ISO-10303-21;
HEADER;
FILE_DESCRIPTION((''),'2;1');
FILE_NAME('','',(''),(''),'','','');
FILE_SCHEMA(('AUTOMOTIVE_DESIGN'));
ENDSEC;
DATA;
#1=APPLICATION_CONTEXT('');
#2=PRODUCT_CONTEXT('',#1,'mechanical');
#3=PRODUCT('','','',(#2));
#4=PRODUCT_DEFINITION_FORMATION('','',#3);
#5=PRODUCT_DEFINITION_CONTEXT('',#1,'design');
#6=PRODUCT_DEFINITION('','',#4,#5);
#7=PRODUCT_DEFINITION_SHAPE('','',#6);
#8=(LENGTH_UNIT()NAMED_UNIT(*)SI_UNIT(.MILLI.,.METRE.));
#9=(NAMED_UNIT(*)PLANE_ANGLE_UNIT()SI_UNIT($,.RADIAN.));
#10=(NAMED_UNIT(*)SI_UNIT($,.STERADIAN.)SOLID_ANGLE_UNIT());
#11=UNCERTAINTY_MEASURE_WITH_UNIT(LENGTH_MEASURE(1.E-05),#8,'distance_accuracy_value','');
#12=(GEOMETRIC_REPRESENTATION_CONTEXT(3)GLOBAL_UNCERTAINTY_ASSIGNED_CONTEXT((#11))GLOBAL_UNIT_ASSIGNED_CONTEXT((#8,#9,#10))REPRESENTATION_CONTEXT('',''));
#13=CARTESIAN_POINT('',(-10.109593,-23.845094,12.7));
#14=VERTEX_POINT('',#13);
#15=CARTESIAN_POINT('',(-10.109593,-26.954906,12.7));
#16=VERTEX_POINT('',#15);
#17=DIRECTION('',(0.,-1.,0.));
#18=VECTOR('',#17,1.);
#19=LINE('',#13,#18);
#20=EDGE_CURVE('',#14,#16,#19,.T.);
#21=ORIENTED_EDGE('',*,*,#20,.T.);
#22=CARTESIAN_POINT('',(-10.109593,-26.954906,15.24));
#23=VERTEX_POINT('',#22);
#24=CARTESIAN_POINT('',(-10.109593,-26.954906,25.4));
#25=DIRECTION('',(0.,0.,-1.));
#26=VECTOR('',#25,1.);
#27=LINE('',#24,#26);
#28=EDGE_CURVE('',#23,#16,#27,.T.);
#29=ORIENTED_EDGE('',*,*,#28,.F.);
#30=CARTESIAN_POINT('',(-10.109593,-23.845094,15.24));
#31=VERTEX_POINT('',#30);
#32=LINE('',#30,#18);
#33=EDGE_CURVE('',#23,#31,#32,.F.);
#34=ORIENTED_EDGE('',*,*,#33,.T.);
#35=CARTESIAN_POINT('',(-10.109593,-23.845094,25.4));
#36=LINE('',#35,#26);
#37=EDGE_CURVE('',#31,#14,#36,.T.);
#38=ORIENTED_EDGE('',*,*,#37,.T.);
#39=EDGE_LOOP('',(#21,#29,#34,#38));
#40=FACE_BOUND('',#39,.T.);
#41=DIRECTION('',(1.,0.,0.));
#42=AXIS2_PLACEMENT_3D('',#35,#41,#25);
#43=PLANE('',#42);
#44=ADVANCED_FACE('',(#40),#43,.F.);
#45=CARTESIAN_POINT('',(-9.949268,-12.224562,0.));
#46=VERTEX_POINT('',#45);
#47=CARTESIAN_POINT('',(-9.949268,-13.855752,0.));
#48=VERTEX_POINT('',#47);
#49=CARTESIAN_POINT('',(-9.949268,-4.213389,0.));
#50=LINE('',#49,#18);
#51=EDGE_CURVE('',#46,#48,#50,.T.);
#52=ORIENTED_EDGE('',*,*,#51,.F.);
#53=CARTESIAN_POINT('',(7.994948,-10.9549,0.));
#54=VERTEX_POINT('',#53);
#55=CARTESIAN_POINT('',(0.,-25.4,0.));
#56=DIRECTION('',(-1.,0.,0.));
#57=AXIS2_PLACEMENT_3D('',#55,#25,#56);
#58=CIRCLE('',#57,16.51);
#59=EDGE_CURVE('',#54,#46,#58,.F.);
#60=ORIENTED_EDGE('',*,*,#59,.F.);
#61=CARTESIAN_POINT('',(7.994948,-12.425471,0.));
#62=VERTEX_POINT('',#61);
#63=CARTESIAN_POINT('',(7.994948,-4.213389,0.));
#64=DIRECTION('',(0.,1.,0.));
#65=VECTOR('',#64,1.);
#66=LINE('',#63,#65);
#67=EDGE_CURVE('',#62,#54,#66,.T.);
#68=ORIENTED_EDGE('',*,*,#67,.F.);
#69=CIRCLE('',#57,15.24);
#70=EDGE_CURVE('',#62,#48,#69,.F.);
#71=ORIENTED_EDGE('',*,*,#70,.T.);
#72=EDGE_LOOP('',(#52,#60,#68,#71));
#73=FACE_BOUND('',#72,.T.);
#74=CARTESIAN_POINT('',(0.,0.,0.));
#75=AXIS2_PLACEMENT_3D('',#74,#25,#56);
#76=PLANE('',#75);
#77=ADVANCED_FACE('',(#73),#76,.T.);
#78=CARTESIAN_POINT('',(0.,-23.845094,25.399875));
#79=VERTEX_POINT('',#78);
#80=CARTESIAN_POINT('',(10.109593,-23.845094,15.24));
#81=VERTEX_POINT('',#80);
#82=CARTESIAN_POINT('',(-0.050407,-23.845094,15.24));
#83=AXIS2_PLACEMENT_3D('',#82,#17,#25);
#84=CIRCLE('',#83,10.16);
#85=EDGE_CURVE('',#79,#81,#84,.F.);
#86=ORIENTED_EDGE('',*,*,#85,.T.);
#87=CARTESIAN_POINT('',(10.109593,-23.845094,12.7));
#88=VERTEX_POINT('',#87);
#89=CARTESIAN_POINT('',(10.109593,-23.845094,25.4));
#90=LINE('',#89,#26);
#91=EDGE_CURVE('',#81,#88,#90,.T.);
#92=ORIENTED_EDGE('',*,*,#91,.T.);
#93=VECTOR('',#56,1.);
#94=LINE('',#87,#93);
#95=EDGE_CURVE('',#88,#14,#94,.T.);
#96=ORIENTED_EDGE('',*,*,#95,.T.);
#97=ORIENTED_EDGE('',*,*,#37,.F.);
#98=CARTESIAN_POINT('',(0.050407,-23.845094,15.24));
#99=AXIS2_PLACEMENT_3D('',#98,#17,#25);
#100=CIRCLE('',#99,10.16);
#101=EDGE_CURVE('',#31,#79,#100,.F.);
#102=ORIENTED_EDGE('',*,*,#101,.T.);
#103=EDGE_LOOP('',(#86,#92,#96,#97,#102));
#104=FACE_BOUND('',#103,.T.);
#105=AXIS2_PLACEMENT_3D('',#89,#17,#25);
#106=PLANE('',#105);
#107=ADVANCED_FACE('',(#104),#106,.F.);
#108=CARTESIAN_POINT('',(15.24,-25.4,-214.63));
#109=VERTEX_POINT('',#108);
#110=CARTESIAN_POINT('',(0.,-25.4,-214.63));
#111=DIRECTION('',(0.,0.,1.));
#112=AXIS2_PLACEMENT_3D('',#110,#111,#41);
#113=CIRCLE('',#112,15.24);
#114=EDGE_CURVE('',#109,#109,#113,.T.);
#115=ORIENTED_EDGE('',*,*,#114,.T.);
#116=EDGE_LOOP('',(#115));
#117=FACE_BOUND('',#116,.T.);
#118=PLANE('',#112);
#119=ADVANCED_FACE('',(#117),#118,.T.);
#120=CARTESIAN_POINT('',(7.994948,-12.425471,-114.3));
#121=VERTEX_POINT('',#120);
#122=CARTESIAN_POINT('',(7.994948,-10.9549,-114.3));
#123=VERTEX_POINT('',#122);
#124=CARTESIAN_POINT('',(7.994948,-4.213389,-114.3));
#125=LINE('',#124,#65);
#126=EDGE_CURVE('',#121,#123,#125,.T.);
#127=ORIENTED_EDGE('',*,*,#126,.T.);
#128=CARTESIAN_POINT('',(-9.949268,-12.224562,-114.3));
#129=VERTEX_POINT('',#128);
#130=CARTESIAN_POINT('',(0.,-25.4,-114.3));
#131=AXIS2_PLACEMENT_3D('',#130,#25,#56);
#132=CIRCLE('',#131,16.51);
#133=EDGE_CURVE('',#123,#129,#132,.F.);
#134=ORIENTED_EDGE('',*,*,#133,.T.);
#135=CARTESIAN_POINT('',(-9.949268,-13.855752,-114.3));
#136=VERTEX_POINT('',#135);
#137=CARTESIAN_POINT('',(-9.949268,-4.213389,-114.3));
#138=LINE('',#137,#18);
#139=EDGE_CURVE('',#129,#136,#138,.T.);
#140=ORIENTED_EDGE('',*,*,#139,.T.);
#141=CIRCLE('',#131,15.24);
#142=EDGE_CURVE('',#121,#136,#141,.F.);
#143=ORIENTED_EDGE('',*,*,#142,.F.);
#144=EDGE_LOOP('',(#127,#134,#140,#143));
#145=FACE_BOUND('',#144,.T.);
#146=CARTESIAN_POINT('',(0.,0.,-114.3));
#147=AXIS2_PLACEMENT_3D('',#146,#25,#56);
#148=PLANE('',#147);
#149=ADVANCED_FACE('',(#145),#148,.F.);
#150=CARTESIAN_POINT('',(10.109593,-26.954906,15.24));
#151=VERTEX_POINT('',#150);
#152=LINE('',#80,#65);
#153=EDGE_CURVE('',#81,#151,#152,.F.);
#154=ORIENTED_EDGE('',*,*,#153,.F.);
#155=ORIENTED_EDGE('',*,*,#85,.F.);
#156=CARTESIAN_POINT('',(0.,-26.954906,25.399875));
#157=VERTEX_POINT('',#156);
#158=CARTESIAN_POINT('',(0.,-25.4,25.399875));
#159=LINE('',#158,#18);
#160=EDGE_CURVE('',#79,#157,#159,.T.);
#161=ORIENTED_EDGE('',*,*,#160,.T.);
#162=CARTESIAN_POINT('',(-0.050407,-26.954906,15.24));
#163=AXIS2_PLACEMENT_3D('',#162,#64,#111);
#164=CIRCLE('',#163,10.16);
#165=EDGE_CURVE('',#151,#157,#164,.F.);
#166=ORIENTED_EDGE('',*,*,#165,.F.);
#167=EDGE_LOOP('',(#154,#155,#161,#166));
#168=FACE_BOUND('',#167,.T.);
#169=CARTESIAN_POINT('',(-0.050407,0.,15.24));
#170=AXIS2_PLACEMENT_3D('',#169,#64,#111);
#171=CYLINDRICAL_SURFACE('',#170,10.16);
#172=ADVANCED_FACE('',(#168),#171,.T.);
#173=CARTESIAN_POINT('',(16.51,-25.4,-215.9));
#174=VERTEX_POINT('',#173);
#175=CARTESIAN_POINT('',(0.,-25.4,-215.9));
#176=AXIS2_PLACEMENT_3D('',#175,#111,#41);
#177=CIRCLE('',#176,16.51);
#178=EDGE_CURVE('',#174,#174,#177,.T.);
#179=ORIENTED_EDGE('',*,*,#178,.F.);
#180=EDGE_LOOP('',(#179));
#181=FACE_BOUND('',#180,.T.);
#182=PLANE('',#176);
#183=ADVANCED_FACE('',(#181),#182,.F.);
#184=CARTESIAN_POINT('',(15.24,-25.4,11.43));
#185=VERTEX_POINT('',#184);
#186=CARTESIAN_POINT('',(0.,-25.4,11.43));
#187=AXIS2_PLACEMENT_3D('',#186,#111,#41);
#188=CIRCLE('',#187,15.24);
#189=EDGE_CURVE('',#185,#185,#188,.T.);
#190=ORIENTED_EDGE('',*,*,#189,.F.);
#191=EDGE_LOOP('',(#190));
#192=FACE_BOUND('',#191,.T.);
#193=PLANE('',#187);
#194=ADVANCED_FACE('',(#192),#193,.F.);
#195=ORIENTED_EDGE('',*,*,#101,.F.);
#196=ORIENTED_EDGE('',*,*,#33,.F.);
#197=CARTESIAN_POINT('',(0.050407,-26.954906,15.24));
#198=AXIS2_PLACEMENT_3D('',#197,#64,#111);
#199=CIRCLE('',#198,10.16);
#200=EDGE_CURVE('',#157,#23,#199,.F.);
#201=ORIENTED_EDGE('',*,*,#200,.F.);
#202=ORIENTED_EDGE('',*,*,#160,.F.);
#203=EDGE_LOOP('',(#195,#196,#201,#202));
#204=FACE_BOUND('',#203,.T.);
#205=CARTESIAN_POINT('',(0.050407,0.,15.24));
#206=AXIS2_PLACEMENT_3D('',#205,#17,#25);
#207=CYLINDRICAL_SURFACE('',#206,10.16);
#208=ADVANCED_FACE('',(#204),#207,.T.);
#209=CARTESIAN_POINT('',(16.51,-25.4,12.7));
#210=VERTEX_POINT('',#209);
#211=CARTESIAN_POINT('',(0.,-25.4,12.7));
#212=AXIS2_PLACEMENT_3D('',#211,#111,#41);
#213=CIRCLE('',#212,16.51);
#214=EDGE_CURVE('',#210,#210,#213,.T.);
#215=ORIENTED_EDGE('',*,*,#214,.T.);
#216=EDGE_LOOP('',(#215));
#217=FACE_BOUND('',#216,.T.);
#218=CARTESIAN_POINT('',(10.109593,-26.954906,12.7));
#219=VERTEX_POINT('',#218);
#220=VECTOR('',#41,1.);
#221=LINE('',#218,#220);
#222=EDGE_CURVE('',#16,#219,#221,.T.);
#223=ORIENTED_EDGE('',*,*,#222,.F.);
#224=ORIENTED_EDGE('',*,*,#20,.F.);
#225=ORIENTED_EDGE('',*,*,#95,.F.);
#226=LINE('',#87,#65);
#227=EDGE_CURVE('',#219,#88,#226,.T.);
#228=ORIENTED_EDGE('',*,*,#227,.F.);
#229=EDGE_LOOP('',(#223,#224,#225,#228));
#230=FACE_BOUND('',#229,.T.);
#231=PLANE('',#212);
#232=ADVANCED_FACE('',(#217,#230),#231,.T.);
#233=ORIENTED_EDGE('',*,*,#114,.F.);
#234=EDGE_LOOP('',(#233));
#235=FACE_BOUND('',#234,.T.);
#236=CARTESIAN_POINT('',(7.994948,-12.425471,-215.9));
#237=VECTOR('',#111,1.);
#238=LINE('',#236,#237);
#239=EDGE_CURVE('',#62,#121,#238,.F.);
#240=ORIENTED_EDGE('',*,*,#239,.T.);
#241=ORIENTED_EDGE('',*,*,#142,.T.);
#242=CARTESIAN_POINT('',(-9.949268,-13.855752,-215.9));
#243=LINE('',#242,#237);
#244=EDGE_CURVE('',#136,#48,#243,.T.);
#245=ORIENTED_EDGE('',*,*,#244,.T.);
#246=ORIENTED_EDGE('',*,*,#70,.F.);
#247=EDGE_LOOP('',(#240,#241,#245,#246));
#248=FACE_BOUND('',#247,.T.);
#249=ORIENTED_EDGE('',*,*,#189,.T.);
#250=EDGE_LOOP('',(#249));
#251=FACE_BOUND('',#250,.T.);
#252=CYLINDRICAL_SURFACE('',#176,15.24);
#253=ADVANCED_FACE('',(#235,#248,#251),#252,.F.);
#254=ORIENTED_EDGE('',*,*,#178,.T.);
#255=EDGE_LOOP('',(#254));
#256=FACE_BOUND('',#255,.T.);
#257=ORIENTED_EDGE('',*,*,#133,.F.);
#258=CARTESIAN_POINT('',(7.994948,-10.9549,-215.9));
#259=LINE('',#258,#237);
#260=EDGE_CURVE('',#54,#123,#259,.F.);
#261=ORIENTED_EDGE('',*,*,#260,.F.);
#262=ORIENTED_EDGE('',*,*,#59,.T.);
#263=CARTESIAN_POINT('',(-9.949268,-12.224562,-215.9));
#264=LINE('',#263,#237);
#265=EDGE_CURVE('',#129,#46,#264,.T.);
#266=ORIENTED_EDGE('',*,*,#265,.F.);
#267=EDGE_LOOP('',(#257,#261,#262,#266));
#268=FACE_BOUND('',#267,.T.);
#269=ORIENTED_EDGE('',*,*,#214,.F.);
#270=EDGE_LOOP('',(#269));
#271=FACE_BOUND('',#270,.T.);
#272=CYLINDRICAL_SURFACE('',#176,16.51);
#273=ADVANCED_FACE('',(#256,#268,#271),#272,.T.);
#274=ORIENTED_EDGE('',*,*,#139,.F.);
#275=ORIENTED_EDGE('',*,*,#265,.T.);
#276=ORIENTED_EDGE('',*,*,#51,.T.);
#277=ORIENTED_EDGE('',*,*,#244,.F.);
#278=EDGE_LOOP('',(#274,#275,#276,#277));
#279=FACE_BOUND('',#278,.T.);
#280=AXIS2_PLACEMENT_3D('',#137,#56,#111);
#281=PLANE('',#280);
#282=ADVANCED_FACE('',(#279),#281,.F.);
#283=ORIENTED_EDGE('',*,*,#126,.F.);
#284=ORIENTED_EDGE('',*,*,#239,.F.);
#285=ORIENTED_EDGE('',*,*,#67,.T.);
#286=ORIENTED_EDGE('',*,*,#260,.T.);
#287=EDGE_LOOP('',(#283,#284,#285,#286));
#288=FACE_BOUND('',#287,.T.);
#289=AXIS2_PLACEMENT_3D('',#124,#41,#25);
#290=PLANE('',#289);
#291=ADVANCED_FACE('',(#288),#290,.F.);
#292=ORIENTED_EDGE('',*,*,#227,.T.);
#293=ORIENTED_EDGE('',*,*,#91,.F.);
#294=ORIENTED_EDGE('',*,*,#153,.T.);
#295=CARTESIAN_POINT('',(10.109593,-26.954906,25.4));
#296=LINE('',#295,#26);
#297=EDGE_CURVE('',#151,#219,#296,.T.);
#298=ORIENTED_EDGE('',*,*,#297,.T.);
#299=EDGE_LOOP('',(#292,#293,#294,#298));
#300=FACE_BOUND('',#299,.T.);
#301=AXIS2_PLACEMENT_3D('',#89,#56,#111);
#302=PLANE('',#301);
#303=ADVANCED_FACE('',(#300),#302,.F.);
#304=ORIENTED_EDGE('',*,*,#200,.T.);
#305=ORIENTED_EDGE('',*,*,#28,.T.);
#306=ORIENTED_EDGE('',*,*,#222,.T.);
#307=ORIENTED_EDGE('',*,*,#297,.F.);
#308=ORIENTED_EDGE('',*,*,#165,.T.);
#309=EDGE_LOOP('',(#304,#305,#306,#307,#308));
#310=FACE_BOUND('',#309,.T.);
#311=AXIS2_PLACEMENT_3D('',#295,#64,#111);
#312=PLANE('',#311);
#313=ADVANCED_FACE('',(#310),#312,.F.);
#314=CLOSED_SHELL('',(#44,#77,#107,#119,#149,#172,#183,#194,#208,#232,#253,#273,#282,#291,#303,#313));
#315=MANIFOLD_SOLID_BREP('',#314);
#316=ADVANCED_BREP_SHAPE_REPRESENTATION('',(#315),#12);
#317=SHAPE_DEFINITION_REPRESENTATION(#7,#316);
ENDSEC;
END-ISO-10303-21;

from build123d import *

# Parameters (mm, degrees)
BOSS_EXTRUDE1_DEPTH      = 12.7
BOSS_EXTRUDE1_DEPTH_BACK = 215.9
SKETCH1_R                = 16.51
SHELL1_T                 = 1.27
SKETCH2_W                = 17.94421574
SKETCH2_H                = 13.769076435
CUT_EXTRUDE1_DEPTH       = 114.3
SKETCH3_W                = 20.21918521
SKETCH3_H                = 3.109812076
BOSS_EXTRUDE2_DEPTH      = 12.7
FILLET1_R                = 10.16


with BuildPart() as part:
    # Sketch1 → Boss-Extrude1 (new, two sides: drawn at the far end of the back side and taken through both)
    with BuildSketch(Plane.XY.offset(-BOSS_EXTRUDE1_DEPTH_BACK)):
        with Locations((0, -25.4)):
            Circle(SKETCH1_R)
    extrude(amount=BOSS_EXTRUDE1_DEPTH + BOSS_EXTRUDE1_DEPTH_BACK)

    # Shell1 (no face opened: a closed hollow body)
    add(offset(amount=-SHELL1_T, mode=Mode.PRIVATE), mode=Mode.SUBTRACT)

    # Sketch2 → Cut-Extrude1 (cut)
    with BuildSketch(Plane.XY):
        with Locations((-0.977160263, -11.097927059)):
            Rectangle(SKETCH2_W, SKETCH2_H)
    extrude(amount=-CUT_EXTRUDE1_DEPTH, mode=Mode.SUBTRACT)

    # Sketch3 → Boss-Extrude2 (add)
    with BuildSketch(Plane.XY.offset(12.7)):
        with Locations((0, -25.4)):
            Rectangle(SKETCH3_W, SKETCH3_H)
    extrude(amount=BOSS_EXTRUDE2_DEPTH)

    # Fillet1
    # the kernel refuses this fillet: 10.16 mm, written as the material it takes off along each edge
    with BuildSketch(Plane(origin=(10.109592605, -52.354906038, 25.4), x_dir=(0, 0, -1), z_dir=(0, 1, 0)), Plane(origin=(-10.109592605, 1.554906038, 25.4), x_dir=(0, 0, -1), z_dir=(0, -1, 0))) as fillet1_piece_1:
        with BuildLine():
            CenterArc((FILLET1_R, FILLET1_R), FILLET1_R, 180, 90)
            Line((0, FILLET1_R), (0, 0))
            Line((0, 0), (FILLET1_R, 0))
        make_face()
    extrude(amount=53.909812076, mode=Mode.SUBTRACT)


solid = part.part
